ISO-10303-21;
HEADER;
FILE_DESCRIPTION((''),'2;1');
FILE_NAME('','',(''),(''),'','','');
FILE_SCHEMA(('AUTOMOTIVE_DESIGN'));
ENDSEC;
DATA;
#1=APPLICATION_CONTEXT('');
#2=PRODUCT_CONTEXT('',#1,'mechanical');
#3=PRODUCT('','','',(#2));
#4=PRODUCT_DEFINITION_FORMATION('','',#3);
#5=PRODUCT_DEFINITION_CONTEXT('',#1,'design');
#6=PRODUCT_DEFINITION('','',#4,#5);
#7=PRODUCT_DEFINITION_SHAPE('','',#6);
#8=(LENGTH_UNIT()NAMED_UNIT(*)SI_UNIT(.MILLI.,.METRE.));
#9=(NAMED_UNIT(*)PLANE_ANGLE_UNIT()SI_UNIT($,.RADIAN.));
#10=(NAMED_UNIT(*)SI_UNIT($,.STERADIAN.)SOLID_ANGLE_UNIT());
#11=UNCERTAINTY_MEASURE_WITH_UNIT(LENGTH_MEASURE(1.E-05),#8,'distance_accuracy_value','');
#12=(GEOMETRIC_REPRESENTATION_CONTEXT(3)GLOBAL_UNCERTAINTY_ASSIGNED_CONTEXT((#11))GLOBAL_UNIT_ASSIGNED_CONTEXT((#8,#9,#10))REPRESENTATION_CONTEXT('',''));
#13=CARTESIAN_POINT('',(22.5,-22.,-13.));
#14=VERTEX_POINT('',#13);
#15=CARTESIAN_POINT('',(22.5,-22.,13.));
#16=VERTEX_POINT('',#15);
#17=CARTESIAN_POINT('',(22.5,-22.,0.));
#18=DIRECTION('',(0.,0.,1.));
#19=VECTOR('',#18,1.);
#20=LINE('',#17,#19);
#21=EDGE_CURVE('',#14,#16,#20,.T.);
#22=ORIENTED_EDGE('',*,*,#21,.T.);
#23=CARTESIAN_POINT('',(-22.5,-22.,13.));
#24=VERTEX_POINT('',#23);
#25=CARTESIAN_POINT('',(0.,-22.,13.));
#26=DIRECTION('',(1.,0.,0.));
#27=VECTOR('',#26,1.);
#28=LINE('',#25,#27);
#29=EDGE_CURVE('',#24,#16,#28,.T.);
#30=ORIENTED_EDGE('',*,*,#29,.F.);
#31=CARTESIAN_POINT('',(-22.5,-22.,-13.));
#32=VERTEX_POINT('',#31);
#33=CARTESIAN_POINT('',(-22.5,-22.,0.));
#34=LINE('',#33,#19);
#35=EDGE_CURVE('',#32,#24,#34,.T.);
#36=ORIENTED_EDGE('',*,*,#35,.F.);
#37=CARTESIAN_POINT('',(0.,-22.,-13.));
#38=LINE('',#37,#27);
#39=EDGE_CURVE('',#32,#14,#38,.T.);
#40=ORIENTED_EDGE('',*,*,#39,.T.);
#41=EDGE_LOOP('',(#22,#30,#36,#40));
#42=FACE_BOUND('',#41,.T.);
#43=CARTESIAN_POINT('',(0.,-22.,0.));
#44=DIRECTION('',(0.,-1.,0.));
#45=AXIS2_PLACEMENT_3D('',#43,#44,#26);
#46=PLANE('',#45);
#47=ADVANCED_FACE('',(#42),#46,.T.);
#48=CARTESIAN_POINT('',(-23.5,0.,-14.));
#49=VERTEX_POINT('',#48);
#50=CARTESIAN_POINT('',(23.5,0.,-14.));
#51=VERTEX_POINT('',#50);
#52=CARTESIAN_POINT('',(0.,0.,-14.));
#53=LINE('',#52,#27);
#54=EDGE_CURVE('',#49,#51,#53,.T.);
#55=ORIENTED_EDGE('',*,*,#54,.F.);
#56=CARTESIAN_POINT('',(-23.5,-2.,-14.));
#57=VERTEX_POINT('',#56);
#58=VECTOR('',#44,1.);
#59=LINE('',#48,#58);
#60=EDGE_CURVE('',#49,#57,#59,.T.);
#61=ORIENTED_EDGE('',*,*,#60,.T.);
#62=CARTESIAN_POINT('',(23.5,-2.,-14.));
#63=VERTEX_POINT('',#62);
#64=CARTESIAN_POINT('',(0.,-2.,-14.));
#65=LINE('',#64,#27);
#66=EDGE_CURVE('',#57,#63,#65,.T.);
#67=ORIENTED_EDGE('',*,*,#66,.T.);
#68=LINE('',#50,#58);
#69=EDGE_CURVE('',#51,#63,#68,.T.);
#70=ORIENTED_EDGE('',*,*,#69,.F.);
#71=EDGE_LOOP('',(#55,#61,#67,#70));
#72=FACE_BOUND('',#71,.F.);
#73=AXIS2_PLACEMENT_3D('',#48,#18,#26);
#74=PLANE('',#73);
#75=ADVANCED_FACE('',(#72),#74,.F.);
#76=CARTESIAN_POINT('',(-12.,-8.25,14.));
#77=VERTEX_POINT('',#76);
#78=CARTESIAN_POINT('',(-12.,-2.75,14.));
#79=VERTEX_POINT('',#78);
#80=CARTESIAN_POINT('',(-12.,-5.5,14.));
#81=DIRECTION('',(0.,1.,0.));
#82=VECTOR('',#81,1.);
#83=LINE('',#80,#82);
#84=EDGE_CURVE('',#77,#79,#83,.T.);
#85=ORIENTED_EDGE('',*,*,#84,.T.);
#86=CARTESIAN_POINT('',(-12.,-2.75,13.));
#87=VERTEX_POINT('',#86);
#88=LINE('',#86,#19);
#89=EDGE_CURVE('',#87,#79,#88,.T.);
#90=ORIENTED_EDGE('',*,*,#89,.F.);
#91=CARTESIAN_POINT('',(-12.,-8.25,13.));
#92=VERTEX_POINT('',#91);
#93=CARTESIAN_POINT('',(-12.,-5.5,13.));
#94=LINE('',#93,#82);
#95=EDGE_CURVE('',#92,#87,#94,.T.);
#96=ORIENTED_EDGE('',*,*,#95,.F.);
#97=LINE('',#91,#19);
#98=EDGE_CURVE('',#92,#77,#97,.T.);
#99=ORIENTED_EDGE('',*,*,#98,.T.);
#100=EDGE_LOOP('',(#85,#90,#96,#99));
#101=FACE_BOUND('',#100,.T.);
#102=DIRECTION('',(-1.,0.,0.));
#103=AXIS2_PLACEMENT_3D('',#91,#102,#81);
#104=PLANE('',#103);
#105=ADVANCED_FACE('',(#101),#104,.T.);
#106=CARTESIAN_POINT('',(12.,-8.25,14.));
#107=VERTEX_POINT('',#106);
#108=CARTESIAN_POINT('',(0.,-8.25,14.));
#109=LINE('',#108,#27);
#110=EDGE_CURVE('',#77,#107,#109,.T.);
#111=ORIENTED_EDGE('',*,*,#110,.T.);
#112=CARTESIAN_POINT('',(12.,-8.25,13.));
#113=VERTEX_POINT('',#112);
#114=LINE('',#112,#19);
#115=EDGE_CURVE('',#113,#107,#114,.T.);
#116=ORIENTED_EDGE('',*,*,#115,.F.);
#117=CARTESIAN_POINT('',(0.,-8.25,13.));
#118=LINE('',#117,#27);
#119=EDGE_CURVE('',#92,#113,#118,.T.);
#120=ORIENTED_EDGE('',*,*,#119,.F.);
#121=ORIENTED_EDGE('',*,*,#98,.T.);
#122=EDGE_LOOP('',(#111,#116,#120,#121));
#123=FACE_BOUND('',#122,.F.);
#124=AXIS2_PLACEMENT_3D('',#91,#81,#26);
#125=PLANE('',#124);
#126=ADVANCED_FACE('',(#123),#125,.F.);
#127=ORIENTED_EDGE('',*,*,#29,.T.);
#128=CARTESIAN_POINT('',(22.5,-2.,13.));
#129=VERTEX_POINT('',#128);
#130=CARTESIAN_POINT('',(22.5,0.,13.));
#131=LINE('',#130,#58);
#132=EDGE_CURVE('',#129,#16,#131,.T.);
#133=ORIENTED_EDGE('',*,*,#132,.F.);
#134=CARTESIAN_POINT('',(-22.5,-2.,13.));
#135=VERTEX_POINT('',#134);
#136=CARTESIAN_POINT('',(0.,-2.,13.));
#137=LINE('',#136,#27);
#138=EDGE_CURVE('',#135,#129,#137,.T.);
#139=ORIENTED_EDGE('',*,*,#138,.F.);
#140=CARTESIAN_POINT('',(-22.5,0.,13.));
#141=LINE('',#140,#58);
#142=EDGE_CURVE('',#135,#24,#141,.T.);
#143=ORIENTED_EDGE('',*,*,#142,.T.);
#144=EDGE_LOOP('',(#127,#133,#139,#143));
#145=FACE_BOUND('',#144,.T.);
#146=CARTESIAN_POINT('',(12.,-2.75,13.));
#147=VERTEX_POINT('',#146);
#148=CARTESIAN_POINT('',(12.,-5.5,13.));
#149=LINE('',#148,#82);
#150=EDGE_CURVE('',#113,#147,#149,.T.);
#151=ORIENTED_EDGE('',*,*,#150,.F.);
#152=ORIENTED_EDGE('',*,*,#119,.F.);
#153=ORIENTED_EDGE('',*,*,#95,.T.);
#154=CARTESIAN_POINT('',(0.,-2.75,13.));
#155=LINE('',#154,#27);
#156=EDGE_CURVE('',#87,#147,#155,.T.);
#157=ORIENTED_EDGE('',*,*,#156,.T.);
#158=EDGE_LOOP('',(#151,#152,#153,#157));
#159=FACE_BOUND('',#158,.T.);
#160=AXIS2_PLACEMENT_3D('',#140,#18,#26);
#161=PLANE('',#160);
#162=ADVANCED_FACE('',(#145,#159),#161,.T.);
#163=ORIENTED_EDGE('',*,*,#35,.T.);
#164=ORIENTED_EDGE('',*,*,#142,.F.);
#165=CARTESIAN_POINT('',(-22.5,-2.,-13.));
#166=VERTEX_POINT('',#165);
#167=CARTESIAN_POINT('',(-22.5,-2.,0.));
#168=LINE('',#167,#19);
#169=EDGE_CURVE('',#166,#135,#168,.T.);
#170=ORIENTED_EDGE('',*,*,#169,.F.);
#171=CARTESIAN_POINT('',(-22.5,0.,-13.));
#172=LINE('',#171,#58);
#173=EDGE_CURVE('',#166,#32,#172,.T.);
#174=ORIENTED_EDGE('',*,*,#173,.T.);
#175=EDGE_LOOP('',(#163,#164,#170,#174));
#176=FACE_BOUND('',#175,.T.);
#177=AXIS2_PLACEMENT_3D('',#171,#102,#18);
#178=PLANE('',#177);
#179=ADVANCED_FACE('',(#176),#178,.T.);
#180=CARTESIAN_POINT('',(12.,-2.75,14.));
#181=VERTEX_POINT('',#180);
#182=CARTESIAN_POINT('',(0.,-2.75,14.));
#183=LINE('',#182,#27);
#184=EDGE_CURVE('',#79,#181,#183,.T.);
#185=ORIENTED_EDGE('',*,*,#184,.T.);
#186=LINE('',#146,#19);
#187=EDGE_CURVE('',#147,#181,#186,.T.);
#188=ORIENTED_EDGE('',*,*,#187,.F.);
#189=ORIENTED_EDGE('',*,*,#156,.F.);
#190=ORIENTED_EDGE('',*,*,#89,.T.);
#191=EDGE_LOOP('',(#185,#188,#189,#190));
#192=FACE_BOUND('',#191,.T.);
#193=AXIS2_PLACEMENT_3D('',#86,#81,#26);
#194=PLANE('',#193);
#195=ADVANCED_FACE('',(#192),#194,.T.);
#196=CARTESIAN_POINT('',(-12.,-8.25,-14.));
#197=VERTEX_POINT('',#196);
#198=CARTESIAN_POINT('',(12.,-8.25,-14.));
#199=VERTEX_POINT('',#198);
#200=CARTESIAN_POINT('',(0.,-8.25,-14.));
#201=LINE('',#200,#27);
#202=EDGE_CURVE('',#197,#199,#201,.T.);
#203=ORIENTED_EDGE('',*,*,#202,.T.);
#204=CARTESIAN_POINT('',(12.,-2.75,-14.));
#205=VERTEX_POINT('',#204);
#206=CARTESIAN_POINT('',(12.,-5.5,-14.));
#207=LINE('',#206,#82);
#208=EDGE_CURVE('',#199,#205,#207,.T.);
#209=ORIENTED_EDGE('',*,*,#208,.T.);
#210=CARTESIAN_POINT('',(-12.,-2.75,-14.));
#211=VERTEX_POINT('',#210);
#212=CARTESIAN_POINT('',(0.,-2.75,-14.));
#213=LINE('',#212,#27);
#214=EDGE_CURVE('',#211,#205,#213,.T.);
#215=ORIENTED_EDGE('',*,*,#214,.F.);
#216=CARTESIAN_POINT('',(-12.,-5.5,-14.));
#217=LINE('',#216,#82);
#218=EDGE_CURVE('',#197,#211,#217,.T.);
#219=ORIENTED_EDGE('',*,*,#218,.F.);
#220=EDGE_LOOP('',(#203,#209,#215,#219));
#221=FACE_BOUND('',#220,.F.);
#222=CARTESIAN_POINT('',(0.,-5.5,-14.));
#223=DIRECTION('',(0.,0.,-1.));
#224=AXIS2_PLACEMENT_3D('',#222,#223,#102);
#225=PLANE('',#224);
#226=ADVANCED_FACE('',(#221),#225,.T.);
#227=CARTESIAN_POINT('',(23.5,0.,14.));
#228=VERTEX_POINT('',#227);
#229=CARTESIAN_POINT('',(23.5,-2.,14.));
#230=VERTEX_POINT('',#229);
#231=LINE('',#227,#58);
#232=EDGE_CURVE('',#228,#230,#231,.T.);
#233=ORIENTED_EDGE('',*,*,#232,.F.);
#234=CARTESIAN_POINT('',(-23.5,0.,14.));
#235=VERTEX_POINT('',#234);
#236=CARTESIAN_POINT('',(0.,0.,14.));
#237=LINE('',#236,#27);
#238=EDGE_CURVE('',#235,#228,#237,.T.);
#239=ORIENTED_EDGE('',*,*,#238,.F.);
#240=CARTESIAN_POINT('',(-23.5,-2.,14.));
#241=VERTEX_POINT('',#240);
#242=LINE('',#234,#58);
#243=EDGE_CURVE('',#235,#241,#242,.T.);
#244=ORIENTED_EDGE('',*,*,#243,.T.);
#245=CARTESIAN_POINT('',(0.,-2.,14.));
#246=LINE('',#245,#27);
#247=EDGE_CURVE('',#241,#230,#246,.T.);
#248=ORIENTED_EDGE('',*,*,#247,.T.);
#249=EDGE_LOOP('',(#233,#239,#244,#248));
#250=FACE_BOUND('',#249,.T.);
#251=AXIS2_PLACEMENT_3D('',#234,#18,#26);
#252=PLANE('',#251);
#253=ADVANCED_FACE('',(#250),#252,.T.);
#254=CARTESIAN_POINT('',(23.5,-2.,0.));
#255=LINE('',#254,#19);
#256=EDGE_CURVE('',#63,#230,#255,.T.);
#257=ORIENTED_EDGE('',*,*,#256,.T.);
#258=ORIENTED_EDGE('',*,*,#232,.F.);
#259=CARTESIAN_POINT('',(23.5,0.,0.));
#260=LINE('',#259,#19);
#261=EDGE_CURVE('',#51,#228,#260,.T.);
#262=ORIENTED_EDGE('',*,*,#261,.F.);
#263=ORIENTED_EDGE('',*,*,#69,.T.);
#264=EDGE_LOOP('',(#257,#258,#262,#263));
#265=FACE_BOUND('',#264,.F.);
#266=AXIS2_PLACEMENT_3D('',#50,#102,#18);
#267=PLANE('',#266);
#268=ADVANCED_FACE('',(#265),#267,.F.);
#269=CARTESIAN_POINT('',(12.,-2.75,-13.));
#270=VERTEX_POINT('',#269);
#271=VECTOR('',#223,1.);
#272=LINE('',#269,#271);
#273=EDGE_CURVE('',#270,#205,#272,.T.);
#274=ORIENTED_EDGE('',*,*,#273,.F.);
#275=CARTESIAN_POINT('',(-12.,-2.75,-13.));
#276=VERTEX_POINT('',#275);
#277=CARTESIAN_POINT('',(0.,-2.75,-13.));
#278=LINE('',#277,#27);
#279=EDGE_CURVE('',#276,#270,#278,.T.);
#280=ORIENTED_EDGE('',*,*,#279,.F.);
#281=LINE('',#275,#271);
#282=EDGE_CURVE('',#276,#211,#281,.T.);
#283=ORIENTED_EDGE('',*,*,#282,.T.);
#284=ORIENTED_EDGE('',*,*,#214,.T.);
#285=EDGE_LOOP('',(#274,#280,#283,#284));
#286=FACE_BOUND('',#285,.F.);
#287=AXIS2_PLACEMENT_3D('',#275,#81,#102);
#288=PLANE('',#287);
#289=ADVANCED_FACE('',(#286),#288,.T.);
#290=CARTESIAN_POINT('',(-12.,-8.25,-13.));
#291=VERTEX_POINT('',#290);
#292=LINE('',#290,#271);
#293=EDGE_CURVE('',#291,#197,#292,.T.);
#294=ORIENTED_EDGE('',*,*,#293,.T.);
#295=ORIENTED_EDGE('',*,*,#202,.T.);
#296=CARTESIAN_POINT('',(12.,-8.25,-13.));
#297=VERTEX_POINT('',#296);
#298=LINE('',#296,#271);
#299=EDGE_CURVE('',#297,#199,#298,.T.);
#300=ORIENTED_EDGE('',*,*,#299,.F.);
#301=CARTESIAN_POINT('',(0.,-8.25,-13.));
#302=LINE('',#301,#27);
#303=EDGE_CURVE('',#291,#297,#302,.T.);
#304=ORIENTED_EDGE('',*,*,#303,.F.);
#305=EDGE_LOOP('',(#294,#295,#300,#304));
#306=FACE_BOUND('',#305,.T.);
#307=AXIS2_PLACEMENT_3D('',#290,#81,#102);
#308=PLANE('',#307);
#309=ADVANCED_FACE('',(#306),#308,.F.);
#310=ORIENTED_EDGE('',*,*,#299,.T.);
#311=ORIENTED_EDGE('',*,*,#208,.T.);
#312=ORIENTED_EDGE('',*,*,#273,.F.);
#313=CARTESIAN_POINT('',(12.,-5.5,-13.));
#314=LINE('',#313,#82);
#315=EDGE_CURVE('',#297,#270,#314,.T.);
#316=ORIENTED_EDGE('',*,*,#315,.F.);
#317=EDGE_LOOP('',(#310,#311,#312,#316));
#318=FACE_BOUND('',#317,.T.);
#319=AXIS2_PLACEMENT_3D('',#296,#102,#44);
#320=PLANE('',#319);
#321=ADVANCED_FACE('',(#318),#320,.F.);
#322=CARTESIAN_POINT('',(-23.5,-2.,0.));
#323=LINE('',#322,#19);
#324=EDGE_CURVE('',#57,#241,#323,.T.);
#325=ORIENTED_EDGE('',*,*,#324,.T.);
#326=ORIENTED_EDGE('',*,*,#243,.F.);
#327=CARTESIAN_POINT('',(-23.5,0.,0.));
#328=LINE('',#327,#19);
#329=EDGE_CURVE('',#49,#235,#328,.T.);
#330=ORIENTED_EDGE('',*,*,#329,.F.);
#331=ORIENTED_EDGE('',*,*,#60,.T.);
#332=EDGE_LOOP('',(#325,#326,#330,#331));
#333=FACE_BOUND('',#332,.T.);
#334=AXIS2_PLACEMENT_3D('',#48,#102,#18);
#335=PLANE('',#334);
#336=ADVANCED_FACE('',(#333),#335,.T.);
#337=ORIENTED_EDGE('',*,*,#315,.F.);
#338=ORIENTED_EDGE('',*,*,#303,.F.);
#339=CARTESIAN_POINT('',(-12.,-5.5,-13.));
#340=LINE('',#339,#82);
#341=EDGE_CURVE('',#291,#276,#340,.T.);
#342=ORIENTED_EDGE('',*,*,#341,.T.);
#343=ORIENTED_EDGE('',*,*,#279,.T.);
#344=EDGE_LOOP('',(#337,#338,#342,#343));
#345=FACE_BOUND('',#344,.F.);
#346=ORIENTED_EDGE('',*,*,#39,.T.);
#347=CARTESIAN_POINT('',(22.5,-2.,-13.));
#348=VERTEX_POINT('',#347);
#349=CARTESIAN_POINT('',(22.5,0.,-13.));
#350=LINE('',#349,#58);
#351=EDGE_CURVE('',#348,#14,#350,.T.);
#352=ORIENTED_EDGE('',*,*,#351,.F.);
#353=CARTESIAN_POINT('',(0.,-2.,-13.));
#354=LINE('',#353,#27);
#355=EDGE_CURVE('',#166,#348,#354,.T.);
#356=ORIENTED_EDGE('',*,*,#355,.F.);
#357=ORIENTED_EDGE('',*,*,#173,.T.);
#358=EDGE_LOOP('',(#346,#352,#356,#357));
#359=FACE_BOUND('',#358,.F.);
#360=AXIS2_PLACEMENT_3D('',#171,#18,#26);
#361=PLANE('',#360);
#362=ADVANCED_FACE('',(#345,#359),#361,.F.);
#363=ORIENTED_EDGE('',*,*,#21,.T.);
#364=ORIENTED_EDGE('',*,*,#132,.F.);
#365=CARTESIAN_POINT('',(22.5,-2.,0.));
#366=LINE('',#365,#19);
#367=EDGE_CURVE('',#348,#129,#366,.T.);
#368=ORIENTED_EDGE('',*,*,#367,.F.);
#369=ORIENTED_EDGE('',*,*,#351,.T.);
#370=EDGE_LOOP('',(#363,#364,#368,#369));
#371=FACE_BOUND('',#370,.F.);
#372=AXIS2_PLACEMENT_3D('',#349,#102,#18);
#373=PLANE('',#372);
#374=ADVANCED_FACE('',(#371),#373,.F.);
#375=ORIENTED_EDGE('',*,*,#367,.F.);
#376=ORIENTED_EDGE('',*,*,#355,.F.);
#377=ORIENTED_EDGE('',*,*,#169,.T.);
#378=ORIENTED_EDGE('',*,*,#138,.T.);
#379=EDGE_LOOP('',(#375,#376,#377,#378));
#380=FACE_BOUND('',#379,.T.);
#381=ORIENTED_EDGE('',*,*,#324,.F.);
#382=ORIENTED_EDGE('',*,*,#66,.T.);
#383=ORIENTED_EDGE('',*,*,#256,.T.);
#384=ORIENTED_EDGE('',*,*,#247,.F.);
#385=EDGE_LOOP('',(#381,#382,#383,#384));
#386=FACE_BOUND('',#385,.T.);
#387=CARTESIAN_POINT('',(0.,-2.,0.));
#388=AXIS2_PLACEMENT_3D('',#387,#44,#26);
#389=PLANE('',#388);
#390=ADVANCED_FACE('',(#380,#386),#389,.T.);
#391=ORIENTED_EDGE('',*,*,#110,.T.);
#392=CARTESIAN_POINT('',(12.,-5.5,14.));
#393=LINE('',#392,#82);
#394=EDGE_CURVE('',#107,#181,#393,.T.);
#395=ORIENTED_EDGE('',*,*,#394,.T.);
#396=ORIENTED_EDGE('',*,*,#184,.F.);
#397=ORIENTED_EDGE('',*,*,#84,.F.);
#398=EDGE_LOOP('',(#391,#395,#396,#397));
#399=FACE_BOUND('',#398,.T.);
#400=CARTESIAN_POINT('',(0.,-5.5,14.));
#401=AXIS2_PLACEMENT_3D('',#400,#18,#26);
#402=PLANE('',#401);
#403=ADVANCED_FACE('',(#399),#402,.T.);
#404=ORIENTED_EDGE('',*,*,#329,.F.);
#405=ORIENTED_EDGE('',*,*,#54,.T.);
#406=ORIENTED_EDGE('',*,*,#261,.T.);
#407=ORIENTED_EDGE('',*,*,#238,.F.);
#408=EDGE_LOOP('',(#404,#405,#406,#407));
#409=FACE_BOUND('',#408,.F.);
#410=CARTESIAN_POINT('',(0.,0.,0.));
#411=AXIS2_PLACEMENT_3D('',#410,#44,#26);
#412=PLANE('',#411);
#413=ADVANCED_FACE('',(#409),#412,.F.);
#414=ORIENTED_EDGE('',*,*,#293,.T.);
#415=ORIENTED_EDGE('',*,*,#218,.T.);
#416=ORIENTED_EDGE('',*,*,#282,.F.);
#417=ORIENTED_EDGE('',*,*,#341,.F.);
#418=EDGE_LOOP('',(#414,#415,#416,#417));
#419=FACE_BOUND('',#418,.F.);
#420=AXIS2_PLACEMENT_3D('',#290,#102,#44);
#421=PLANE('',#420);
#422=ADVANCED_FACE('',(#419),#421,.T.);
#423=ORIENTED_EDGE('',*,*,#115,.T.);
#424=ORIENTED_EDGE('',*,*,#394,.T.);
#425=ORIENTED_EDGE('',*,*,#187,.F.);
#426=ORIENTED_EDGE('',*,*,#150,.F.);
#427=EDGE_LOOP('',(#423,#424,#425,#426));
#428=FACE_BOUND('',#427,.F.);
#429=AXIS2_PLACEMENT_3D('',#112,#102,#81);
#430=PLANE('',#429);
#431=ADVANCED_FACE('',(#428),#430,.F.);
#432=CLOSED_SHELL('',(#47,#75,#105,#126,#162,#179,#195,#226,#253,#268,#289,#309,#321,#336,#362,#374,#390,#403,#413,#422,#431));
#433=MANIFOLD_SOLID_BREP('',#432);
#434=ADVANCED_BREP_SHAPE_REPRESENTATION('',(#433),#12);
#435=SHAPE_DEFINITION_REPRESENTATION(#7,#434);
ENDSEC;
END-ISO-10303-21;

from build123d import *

# Parameters (mm, degrees)
F0_W     = 45
F0_H     = 26
F1_DEPTH = 22
F0_W_2   = 47
F0_H_2   = 28
F2_DEPTH = 2
F3_W     = 24
F3_H     = 5.5
F4_DEPTH = 1


# Not quite as in the source:
# - a pattern or mirror of a feature is missing from the dataset's text; its kind, count and spacing are read off the source's solid


with BuildPart() as f1:
    # F0 (on Front) → F1 (new body)
    with BuildSketch(Plane.XZ):
        Rectangle(F0_W, F0_H)
    extrude(amount=F1_DEPTH)

    # F0 (on Front) → F2 (join)
    with BuildSketch(Plane.XZ):
        Rectangle(F0_W_2, F0_H_2)
        Rectangle(F0_W, F0_H, mode=Mode.SUBTRACT)
    extrude(amount=F2_DEPTH)

    # F3 (on face) → F4 (join)
    with BuildSketch(Plane.XY.offset(13)):
        with Locations((0, -5.5)):
            Rectangle(F3_W, F3_H)
    f4 = extrude(amount=F4_DEPTH)

    # F4_copies: F4 across plane
    add(f4.mirror(Plane(origin=(0, 0, 0), x_dir=(-1, 0, 0), z_dir=(0, 0, -1))))


solid = f1.part
